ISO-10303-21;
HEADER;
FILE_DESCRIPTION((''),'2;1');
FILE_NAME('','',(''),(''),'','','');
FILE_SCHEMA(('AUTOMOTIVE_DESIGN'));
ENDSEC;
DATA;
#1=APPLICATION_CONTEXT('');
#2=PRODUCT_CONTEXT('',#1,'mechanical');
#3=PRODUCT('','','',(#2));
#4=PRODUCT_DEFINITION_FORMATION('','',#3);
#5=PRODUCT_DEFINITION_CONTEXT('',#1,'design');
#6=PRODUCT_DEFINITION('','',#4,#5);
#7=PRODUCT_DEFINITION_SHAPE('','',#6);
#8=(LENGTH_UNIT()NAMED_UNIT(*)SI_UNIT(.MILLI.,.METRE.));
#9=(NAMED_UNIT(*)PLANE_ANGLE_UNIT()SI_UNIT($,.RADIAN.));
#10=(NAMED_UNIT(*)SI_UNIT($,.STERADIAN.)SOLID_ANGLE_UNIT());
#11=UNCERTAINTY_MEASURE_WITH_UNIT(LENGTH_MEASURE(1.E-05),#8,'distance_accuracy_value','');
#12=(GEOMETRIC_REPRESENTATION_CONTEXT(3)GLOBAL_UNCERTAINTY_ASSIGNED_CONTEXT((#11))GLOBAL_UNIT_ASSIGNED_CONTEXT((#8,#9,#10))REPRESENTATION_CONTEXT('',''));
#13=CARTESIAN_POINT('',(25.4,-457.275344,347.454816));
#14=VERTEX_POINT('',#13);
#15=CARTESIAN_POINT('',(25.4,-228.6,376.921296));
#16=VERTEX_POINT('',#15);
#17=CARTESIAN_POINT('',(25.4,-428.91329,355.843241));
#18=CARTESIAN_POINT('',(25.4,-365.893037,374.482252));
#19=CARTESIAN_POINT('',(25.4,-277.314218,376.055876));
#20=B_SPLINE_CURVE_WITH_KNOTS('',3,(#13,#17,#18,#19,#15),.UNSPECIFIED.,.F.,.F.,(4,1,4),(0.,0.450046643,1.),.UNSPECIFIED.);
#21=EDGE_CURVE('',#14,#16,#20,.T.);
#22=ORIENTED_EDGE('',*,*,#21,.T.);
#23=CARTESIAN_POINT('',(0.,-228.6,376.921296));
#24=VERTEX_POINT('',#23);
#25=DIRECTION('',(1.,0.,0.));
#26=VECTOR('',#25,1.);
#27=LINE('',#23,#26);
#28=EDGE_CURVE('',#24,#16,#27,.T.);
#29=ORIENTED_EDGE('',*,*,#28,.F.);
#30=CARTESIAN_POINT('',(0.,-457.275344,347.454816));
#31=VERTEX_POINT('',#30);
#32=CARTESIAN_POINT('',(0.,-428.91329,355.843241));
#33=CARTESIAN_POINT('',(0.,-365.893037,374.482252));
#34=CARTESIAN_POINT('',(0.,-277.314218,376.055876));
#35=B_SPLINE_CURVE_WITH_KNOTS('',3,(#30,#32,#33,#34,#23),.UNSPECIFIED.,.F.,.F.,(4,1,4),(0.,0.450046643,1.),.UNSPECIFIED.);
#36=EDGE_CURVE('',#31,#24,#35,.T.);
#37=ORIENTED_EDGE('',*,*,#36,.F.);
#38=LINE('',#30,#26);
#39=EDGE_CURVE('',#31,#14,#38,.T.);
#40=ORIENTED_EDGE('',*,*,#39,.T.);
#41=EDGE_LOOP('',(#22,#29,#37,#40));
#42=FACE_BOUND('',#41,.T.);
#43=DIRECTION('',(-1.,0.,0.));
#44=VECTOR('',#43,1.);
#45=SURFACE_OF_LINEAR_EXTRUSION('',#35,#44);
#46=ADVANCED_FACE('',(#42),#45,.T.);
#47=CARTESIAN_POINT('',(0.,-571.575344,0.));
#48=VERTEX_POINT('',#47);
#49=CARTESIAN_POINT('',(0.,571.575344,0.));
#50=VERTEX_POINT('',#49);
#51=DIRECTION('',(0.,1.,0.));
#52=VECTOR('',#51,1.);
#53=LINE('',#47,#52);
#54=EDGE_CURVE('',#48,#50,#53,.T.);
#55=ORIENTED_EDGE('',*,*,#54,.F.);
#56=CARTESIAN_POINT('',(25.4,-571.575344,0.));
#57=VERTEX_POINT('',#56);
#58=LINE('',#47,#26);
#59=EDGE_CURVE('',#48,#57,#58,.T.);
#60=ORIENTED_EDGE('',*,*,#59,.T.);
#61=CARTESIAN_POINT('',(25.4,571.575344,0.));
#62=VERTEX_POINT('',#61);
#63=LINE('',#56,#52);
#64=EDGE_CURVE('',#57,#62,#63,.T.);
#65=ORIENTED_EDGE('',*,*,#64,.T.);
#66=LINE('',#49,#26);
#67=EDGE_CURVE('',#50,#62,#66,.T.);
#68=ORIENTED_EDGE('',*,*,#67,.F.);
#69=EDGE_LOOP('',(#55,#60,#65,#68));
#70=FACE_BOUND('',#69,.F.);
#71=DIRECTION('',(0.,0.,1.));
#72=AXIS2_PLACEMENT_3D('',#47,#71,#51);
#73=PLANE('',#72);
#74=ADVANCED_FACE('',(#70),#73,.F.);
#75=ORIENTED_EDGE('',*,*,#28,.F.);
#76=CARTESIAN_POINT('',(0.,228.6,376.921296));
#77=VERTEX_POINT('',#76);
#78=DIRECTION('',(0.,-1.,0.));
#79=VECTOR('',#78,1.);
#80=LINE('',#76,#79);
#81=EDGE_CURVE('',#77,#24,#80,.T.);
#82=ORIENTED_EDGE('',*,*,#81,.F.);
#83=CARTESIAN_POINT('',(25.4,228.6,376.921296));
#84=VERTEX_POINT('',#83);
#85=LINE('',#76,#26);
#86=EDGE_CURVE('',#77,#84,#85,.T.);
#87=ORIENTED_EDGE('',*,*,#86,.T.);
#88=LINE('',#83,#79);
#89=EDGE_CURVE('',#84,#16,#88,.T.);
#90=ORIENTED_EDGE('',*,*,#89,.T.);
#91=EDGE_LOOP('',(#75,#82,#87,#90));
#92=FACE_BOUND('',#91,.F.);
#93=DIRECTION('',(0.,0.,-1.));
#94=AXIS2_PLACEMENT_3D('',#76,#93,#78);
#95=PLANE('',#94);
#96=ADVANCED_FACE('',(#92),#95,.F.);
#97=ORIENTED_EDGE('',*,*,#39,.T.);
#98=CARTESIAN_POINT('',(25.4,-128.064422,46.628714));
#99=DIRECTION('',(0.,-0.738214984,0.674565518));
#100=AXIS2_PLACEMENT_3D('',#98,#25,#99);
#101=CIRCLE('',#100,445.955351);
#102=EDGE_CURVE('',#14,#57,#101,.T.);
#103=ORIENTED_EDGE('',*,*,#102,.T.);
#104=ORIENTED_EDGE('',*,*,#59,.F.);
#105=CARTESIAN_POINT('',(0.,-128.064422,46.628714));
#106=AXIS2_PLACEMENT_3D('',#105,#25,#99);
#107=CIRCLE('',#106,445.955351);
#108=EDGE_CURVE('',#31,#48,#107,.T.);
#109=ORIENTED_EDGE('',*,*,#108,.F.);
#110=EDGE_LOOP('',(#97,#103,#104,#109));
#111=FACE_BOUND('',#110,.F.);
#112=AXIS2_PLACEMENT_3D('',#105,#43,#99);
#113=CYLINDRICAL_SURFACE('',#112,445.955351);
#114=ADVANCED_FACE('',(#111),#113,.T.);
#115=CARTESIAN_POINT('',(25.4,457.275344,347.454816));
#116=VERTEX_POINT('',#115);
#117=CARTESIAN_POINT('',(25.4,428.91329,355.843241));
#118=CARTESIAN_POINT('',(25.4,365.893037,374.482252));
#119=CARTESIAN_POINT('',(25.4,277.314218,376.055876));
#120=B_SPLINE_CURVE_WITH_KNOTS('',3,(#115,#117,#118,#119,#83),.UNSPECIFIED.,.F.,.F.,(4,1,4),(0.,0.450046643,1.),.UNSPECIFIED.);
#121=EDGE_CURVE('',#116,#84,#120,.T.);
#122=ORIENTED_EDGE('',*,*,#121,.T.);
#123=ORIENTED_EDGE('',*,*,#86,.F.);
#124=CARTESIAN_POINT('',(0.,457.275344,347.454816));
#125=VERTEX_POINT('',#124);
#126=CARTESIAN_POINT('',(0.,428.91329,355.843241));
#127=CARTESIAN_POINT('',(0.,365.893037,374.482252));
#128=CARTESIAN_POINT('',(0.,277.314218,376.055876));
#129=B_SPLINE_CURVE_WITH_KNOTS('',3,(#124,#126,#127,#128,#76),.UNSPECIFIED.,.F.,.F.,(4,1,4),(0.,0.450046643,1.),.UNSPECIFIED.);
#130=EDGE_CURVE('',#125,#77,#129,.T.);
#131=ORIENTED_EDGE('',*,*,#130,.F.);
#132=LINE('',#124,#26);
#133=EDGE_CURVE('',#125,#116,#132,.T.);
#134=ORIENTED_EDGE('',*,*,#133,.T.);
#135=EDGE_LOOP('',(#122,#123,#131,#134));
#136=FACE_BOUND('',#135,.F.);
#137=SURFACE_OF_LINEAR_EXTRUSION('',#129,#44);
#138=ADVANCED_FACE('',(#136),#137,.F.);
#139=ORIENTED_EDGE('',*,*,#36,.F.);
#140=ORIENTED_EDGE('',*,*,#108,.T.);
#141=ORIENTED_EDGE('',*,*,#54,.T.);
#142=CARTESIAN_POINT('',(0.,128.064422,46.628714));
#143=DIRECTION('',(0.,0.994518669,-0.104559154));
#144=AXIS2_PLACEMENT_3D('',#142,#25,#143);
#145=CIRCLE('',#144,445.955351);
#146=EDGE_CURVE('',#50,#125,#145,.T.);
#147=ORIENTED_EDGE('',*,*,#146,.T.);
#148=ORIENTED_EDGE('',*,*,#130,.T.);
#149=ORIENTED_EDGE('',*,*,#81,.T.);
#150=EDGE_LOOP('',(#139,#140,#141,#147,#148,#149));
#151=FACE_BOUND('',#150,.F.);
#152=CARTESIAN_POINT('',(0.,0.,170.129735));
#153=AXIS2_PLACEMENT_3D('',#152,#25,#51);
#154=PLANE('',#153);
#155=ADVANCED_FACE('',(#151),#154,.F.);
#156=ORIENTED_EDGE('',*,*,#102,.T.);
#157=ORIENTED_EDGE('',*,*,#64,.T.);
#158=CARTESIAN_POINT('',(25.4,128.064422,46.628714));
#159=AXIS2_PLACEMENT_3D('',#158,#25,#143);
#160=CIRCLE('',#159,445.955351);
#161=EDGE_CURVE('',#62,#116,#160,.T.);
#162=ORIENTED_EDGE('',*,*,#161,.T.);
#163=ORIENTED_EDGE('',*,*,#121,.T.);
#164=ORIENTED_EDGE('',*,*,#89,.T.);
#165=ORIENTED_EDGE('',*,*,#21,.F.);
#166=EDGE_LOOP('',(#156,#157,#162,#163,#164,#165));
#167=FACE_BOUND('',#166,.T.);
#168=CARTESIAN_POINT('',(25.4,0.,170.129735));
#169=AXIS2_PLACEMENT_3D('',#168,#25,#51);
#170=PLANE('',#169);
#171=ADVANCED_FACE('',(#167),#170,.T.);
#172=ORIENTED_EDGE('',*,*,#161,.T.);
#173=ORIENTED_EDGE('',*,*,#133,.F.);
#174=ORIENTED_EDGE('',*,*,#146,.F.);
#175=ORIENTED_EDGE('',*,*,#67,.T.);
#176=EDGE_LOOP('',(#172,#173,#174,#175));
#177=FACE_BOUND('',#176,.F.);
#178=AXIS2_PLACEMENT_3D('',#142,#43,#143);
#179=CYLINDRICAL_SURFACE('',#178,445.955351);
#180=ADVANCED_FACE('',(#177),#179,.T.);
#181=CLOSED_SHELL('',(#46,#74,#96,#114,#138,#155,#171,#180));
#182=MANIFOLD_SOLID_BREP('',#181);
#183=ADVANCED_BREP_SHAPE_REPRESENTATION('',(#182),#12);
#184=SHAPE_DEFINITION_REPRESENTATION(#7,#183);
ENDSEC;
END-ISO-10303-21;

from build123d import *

# Parameters (mm, degrees)
F1_DEPTH = 25.4


with BuildPart() as f1:
    # F0 (on Right) → F1 (new body)
    with BuildSketch(Plane.YZ):
        with BuildLine():
            Line((228.6, 376.9212961197), (0, 376.9212961197))
            Line((0, 376.9212961197), (-228.6, 376.9212961197))
            add(Edge.make_bspline(
                [(-457.2753436089, 347.454816103), (-428.9132900906, 355.8432406544), (-365.8930365544, 374.4822521654), (-277.3142184262, 376.0558762636), (-228.6, 376.9212961197)],
                knots=[0, 0, 0, 0, 0.4500466426, 1, 1, 1, 1], degree=3))
            ThreePointArc((-457.2753436089, 347.454816103), (-551.68686479, 185.9850935796), (-571.5753436089, 0))
            Line((-571.5753436089, 0), (0, 0))
            Line((0, 0), (571.5753436089, 0))
            ThreePointArc((571.5753436089, 0), (551.68686479, 185.9850935796), (457.2753436089, 347.454816103))
            add(Edge.make_bspline(
                [(457.2753436089, 347.454816103), (428.9132900906, 355.8432406544), (365.8930365544, 374.4822521654), (277.3142184262, 376.0558762636), (228.6, 376.9212961197)],
                knots=[0, 0, 0, 0, 0.4500466426, 1, 1, 1, 1], degree=3))
        make_face()
    extrude(amount=F1_DEPTH)


solid = f1.part
